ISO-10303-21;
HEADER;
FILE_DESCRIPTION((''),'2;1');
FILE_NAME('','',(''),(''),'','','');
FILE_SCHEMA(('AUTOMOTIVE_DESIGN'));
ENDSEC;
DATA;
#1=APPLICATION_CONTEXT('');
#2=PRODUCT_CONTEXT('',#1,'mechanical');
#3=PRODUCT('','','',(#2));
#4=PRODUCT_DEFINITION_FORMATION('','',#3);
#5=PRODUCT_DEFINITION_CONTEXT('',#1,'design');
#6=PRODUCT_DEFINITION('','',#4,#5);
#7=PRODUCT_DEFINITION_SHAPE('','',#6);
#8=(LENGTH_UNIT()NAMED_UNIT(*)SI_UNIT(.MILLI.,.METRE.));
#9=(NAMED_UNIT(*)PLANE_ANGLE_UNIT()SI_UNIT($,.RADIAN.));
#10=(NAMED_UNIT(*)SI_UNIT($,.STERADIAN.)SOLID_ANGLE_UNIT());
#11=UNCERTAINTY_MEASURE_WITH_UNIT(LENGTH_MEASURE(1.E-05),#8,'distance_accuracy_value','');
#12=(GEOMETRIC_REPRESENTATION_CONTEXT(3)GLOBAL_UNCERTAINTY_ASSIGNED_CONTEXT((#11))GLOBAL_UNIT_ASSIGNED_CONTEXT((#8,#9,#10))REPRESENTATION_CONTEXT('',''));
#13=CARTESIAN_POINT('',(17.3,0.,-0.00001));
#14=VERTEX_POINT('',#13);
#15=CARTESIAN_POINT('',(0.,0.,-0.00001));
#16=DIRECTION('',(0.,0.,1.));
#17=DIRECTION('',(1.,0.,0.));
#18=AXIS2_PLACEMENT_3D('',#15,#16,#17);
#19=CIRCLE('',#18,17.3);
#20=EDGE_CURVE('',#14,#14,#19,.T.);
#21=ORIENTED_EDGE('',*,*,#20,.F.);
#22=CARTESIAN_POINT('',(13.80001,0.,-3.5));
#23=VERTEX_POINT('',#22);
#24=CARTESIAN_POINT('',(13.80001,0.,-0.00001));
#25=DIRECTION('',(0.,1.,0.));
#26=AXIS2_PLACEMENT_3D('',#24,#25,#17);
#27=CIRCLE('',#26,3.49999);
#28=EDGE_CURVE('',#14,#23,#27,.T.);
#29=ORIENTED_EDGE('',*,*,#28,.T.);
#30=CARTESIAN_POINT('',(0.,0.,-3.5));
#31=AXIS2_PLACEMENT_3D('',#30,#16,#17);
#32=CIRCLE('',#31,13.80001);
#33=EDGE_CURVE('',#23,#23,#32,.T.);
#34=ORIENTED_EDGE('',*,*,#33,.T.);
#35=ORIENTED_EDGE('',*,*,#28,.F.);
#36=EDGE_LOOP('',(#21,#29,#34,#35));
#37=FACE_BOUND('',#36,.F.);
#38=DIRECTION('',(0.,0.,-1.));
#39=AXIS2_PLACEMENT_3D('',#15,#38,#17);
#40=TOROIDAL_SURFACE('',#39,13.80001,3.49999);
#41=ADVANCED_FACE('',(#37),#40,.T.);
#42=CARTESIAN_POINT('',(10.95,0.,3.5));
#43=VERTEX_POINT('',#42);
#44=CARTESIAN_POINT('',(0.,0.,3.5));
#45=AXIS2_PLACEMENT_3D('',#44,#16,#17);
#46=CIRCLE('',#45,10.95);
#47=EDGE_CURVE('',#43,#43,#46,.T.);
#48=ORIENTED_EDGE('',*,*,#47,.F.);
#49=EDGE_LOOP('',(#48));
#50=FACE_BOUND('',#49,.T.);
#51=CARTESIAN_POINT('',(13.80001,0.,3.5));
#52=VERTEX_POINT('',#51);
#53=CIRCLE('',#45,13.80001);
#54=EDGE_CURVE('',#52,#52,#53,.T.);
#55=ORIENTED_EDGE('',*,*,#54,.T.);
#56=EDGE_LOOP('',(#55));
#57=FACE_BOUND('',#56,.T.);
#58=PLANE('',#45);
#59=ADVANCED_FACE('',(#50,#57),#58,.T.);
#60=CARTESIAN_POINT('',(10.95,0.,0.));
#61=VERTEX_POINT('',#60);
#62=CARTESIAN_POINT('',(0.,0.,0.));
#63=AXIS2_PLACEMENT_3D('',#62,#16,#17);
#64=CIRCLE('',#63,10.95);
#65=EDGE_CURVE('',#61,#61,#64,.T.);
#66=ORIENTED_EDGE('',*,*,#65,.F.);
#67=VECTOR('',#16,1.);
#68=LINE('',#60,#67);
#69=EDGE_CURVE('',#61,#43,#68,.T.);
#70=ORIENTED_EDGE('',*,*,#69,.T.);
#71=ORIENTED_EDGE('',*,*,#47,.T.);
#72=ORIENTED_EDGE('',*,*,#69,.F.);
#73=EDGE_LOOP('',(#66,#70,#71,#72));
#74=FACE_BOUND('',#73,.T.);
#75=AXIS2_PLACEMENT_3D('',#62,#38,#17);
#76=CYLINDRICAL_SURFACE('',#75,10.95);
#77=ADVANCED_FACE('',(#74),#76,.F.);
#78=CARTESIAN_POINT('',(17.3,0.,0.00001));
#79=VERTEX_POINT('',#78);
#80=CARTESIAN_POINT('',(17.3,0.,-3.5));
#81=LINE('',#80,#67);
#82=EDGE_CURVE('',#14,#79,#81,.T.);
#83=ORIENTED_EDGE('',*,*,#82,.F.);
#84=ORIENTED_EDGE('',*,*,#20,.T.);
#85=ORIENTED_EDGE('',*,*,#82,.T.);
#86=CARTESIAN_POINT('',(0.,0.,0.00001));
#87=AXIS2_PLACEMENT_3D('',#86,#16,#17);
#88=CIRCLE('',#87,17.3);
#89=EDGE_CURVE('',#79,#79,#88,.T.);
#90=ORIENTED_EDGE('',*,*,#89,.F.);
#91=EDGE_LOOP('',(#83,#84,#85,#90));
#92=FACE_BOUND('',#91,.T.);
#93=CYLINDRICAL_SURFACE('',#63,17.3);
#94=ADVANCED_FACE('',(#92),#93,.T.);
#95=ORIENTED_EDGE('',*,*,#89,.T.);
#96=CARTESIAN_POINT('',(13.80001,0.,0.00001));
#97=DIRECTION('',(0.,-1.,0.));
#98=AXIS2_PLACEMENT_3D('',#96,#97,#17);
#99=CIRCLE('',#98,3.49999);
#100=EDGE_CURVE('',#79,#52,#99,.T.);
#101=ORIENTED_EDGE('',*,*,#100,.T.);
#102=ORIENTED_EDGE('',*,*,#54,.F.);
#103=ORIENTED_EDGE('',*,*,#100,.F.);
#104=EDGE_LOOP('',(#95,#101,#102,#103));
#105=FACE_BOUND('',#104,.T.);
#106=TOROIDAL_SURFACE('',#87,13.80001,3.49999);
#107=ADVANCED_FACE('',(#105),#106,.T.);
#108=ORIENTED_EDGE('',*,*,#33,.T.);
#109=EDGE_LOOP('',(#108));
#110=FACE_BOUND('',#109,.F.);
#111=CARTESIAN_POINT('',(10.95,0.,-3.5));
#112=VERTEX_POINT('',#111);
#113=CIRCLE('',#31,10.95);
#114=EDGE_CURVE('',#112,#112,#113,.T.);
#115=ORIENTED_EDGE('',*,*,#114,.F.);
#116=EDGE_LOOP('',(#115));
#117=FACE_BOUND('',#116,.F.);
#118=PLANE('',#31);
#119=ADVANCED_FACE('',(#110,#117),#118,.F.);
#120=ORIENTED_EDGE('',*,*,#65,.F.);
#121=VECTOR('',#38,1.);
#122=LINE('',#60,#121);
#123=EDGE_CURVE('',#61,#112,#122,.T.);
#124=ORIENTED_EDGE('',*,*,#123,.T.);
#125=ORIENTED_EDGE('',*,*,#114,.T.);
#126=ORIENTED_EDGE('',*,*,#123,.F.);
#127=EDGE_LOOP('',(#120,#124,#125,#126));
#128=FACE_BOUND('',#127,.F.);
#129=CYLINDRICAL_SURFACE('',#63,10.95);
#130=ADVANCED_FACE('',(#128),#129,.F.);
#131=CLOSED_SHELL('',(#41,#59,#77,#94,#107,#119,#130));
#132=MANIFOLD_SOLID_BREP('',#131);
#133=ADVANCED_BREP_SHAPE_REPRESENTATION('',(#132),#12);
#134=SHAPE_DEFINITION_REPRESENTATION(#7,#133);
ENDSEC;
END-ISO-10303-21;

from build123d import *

# Parameters (mm, degrees)
F0_R     = 17.3
F0_R_2   = 10.95
F1_DEPTH = 3.5
F2_DEPTH = 3.5
F3_R     = 3.49999
F4_R     = 3.49999


# Not quite as in the source:
# - a fillet or chamfer is up to 0.001 mm smaller than in the source, because OpenCascade refuses the exact size


with BuildPart() as f1:
    # F0 (on Top) → F1 (new body)
    with BuildSketch(Plane.XY):
        Circle(F0_R)
        Circle(F0_R_2, mode=Mode.SUBTRACT)
    extrude(amount=F1_DEPTH)

    # F2 (add): a face of the model
    f2_faces = [f1.faces().sort_by_distance(p)[0] for p in [
        (-16.8106821074, 0, 0),
    ]]
    extrude(f2_faces, amount=F2_DEPTH)

    # F3 (radius 3.5 in the source; OpenCascade refuses exactly that, so slightly less here)
    f3_edges = [f1.edges().sort_by_distance(p)[0] for p in [
        (-17.3, 0, 3.5),
    ]]
    fillet(f3_edges, radius=F3_R)

    # F4 (radius 3.5 in the source; OpenCascade refuses exactly that, so slightly less here)
    f4_edges = [f1.edges().sort_by_distance(p)[0] for p in [
        (-17.3, 0, -3.5),
    ]]
    fillet(f4_edges, radius=F4_R)


solid = f1.part
